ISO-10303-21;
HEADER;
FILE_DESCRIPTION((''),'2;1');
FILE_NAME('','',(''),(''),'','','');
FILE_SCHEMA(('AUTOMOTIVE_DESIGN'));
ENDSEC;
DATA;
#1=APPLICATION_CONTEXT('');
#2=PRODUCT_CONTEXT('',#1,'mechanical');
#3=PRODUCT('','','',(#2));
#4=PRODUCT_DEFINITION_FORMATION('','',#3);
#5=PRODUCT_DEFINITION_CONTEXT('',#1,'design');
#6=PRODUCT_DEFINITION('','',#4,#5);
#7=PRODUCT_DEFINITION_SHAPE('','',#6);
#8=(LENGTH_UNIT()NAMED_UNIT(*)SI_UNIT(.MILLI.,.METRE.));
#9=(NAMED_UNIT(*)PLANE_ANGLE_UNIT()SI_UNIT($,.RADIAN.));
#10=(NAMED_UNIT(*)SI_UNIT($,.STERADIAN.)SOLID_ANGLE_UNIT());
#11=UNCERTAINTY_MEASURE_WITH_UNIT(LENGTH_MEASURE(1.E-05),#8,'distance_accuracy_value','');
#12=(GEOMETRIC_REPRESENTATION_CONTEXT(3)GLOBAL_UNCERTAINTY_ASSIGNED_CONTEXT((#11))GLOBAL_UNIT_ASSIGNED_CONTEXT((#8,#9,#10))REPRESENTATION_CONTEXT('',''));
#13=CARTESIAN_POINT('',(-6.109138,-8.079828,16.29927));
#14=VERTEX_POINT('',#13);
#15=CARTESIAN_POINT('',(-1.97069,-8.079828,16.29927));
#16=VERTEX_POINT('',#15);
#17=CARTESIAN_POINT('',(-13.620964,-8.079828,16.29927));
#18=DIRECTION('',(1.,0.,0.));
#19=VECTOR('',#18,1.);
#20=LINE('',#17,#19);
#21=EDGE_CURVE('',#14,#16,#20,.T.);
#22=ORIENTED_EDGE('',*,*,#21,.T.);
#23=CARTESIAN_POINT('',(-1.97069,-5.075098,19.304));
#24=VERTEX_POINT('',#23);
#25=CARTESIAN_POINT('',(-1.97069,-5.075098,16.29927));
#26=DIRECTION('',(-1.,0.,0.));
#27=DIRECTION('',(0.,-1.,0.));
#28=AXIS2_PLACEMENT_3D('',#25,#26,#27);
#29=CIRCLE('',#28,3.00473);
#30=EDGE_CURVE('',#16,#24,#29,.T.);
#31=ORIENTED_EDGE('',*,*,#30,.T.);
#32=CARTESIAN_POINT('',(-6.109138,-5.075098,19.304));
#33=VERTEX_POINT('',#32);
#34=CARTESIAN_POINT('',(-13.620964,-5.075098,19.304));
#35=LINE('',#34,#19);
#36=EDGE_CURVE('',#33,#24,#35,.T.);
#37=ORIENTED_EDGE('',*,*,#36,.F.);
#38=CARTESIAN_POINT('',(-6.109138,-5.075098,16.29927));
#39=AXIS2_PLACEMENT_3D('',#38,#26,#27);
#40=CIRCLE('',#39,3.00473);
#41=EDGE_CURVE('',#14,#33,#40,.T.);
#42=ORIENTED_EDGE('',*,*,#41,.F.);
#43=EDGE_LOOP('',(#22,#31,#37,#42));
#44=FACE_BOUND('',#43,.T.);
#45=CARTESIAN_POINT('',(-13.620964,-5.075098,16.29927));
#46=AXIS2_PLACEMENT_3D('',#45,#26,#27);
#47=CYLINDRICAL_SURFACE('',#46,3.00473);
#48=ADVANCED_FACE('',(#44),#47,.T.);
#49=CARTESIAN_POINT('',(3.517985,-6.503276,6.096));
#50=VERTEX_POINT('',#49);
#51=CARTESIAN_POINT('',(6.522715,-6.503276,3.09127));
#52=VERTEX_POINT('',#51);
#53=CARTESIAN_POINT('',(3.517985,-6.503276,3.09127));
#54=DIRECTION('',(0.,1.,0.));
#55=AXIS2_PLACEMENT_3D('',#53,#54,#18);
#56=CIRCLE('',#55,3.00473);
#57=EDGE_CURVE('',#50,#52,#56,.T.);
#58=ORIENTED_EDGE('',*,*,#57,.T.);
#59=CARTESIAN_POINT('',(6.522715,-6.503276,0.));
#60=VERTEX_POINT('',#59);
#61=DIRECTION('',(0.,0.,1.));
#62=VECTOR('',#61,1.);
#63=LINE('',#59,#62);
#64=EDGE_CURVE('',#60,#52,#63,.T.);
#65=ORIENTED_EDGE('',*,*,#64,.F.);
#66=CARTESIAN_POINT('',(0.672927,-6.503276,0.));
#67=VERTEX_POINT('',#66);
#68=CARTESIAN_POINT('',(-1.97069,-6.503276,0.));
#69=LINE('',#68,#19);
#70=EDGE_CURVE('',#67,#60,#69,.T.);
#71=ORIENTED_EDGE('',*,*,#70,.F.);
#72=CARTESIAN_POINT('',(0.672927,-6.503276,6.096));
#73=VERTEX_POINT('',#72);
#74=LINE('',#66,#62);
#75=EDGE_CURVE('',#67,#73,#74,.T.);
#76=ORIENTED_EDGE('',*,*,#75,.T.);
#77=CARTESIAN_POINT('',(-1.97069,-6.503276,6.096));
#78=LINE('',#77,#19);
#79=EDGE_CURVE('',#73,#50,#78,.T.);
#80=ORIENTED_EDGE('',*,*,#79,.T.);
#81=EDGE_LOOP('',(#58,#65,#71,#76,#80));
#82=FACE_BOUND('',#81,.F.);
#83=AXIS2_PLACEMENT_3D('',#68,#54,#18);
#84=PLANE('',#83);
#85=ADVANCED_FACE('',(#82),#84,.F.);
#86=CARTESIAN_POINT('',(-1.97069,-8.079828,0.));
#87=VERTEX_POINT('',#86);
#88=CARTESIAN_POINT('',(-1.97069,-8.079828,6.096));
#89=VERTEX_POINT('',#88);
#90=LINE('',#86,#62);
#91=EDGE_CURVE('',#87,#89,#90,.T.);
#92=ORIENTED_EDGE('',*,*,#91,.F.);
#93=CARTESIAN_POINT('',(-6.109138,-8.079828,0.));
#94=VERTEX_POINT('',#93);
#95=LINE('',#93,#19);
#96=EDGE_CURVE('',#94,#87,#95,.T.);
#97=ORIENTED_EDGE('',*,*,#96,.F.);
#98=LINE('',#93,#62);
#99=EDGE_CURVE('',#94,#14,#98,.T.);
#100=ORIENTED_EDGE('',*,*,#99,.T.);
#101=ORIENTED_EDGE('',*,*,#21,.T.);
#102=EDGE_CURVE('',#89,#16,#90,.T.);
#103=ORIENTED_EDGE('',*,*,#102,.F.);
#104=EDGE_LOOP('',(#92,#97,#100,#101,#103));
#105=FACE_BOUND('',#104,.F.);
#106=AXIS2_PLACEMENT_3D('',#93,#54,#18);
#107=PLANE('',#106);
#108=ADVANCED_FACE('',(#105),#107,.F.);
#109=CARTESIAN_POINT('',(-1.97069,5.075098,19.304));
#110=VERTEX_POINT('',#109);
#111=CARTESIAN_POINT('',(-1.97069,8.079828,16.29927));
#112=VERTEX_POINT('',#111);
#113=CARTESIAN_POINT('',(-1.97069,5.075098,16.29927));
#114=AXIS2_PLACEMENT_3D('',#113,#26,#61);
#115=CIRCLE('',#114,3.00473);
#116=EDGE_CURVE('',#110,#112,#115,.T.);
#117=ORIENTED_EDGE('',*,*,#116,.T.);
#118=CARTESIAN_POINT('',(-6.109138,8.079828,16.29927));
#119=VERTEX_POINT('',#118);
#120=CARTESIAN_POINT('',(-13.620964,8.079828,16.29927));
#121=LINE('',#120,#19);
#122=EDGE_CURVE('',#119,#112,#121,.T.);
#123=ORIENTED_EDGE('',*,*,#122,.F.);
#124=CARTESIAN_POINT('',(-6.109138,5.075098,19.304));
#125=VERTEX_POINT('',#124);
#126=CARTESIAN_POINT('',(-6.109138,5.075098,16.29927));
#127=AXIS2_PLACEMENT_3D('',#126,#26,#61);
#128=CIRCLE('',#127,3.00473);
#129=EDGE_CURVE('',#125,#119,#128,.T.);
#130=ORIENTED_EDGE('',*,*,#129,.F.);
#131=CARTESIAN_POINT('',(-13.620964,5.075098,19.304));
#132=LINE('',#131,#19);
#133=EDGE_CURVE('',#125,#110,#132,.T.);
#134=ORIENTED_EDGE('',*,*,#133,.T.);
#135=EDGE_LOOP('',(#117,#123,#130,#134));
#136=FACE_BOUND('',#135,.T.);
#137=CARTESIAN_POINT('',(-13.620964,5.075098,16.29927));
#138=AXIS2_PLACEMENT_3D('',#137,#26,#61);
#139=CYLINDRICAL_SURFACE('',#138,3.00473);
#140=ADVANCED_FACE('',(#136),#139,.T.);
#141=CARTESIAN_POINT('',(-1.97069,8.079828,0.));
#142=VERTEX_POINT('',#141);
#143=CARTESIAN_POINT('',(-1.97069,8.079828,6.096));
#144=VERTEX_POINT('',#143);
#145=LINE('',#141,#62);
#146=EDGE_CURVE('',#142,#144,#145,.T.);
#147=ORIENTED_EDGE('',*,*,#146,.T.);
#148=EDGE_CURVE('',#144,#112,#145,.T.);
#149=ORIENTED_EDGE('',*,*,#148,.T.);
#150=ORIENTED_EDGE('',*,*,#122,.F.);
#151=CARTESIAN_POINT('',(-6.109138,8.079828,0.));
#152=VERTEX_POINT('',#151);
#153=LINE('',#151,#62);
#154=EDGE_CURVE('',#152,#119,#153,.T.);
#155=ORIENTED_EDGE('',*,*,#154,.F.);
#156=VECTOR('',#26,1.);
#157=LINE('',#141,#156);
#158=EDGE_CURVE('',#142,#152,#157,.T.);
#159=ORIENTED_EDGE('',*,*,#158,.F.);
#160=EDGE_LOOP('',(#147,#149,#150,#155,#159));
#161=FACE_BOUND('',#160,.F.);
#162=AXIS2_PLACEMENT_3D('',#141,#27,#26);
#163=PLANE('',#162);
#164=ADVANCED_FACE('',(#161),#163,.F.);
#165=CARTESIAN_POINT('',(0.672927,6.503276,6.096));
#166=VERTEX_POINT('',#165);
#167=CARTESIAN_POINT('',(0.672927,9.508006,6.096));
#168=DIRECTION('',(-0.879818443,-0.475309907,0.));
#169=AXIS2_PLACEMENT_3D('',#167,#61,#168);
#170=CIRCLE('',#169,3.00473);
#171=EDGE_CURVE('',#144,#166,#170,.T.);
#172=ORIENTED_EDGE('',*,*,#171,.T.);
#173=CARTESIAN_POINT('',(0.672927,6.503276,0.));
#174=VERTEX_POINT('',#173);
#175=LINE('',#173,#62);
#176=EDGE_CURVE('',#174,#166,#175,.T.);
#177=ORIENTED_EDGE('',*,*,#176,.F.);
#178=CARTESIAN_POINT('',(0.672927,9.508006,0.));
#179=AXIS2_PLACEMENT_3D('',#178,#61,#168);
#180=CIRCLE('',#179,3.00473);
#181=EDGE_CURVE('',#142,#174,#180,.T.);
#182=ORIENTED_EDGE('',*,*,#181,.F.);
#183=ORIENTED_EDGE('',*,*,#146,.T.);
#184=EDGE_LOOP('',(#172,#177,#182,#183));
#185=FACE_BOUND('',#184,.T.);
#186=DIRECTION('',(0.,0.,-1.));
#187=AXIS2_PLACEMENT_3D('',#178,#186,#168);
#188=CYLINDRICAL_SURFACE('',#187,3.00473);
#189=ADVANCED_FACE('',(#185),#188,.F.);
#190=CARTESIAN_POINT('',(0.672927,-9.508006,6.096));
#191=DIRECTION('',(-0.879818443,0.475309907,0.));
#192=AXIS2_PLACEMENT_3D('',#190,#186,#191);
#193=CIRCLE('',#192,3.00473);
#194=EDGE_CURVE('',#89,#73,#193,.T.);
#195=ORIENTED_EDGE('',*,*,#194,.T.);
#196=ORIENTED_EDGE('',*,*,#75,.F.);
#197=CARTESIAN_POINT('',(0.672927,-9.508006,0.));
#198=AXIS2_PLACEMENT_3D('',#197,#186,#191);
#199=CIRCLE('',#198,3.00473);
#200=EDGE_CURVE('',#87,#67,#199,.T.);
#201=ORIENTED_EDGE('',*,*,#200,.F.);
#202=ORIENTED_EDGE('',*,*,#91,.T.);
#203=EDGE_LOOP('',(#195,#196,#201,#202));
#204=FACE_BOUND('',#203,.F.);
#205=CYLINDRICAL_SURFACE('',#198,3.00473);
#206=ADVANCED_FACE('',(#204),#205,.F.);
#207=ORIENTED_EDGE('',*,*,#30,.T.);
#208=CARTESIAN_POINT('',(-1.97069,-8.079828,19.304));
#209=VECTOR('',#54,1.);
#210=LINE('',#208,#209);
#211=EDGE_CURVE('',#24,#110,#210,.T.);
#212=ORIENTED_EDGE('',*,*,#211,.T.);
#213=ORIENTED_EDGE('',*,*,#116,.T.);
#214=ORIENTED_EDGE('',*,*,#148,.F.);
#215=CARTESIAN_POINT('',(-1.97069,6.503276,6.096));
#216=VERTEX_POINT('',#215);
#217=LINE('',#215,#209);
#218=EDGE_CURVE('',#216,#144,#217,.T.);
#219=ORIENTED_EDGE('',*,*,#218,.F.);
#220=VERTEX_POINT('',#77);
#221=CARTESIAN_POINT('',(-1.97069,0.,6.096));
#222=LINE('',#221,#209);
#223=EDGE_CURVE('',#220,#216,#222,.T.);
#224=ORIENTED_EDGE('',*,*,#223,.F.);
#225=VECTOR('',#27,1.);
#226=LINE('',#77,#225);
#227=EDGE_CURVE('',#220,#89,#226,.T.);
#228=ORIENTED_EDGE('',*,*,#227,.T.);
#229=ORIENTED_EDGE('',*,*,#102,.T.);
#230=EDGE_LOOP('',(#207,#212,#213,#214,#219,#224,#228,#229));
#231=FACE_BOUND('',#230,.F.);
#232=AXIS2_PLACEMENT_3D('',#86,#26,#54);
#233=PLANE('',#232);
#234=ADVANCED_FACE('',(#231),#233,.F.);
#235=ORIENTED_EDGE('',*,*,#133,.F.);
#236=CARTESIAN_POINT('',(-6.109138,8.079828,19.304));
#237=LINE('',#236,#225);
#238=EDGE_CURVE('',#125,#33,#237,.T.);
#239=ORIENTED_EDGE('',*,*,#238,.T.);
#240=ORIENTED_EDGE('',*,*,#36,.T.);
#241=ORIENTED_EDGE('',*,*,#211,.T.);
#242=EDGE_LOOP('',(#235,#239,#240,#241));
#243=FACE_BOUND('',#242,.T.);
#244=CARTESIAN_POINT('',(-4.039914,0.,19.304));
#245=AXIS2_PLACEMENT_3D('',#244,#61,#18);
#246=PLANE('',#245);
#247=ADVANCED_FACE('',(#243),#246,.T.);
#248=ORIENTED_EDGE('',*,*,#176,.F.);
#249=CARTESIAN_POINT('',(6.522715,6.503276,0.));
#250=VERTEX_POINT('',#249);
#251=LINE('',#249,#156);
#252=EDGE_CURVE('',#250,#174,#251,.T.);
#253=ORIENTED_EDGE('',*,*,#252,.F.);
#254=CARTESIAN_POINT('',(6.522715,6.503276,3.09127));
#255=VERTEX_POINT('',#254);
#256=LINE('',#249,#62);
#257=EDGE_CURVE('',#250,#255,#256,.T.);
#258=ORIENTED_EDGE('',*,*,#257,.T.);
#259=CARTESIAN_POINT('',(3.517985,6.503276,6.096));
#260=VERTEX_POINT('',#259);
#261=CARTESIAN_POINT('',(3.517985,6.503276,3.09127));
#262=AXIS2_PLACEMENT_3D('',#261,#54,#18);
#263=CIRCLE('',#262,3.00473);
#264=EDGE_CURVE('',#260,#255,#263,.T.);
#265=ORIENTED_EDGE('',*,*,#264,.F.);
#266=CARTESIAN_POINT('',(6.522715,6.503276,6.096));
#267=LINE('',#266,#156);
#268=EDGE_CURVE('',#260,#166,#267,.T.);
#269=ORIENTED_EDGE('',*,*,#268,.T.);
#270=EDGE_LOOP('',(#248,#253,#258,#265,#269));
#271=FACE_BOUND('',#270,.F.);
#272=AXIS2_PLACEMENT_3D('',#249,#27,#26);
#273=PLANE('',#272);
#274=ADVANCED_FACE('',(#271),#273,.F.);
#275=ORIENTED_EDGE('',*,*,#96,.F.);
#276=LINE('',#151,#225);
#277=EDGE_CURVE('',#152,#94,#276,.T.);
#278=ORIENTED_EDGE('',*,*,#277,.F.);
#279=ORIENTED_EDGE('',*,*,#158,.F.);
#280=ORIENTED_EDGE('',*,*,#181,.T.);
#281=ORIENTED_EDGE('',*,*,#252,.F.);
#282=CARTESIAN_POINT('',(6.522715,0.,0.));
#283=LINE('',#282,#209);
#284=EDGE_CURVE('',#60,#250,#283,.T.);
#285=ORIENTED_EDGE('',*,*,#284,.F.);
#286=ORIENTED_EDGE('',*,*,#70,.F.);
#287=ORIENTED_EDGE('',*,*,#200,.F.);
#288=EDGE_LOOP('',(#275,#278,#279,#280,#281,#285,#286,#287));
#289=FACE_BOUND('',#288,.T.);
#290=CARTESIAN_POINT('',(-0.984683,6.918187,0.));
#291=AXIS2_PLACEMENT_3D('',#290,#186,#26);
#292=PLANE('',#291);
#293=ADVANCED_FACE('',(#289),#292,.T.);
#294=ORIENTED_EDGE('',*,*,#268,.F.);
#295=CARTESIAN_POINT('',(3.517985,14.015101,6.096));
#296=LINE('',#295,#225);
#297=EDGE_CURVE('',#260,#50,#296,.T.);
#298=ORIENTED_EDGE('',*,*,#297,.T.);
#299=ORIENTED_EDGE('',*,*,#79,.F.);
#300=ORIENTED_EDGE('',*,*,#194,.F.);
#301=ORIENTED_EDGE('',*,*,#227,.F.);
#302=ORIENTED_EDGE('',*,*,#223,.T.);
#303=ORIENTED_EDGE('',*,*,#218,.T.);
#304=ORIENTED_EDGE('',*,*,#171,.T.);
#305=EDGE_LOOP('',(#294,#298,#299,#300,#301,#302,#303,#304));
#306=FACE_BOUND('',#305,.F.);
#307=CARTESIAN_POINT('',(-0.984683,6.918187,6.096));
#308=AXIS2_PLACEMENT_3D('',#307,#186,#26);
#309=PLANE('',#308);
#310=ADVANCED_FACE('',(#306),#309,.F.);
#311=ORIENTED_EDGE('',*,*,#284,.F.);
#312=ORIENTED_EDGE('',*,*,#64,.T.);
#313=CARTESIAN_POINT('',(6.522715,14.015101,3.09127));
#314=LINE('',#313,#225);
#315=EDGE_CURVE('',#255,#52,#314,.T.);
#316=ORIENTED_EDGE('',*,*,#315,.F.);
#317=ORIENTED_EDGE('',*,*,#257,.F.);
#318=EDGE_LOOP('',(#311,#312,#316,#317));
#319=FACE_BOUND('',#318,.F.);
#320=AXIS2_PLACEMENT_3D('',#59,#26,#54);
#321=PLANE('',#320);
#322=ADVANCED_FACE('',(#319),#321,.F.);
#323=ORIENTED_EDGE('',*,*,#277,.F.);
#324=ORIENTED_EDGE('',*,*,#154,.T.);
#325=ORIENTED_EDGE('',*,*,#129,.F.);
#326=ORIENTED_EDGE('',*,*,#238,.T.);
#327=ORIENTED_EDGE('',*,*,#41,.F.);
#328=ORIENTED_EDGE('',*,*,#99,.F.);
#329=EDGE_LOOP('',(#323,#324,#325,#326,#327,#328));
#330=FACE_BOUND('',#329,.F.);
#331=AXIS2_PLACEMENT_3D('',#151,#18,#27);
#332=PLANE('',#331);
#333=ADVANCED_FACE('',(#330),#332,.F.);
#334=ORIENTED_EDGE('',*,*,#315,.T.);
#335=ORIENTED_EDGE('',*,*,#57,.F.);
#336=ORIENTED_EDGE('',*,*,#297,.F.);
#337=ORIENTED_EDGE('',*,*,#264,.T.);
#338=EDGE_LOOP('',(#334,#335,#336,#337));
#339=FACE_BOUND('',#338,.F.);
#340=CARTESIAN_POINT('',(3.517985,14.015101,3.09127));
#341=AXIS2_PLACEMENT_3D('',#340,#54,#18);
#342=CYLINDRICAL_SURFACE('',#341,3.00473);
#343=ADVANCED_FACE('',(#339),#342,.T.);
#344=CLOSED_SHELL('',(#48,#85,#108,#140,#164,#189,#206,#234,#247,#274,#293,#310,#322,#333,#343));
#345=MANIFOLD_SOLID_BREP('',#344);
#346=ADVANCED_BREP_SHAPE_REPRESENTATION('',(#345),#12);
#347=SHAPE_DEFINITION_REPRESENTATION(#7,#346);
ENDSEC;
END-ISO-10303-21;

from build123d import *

# Parameters (mm, degrees)
F1_DEPTH    = 19.304
F0_W        = 4.2467024177
F0_H        = 13.0065511912
F2_DEPTH    = 6.096
F3_T1_DEPTH = 6.096
F3_T3_DEPTH = 6.096
F3_T5_DEPTH = 19.1620992743
F3_T7_DEPTH = 19.1620992743
F3_T9_DEPTH = 28.0302021899


# Not quite as in the source:
# - a fillet or chamfer that OpenCascade refuses, or shapes differently, is made with other operations: its cross-section is extruded or revolved along the edge and cut away or added


with BuildPart() as f1:
    # F0 (on Top) → F1 (new body)
    with BuildSketch(Plane.XY):
        Polygon((-6.1091380194, 8.0798277631), (-6.1091380194, 0), (-6.1091380194, -8.0798277631), (-1.9706897438, -8.0798277631), (-1.9706897438, -6.5032755956), (-1.9706897438, 6.5032755956), (-1.9706897438, 8.0798277631), align=None)
    extrude(amount=F1_DEPTH)

    # F0 (on Top) → F2 (join)
    with BuildSketch(Plane.XY):
        with Locations((0.1526614651, 0)):
            Rectangle(F0_W, F0_H)
        with Locations((4.3993638828, 0)):
            Rectangle(F0_W, F0_H)
    extrude(amount=F2_DEPTH)

    # F3: fillet of radius 3.0047301997 on 5 edges, made by hand

    # F3_s2 → F3_t1 (join)
    with BuildSketch(Plane.XY):
        with BuildLine():
            ThreePointArc((-1.9706897438, -8.0798277631), (-0.8660843797, -6.9273379324), (0.6729273014, -6.5032755956))
            Line((0.6729273014, -6.5032755956), (-1.9706897438, -6.5032755956))
            Line((-1.9706897438, -6.5032755956), (-1.9706897438, -8.0798277631))
        make_face()
    extrude(amount=F3_T1_DEPTH)

    # F3_s4 → F3_t3 (join)
    with BuildSketch(Plane.XY):
        with BuildLine():
            ThreePointArc((-1.9706897438, 8.0798277631), (-0.8660843797, 6.9273379324), (0.6729273014, 6.5032755956))
            Line((0.6729273014, 6.5032755956), (-1.9706897438, 6.5032755956))
            Line((-1.9706897438, 6.5032755956), (-1.9706897438, 8.0798277631))
        make_face()
    extrude(amount=F3_T3_DEPTH)

    # F3_s6 → F3_t5 (cut)
    with BuildSketch(Plane.YZ.offset(-13.6209635187)):
        with BuildLine():
            ThreePointArc((5.0750975634, 19.304), (7.1997626633, 18.4239349001), (8.0798277631, 16.2992698003))
            Line((8.0798277631, 16.2992698003), (8.0798277631, 19.304))
            Line((8.0798277631, 19.304), (5.0750975634, 19.304))
        make_face()
    extrude(amount=F3_T5_DEPTH, mode=Mode.SUBTRACT)

    # F3_s8 → F3_t7 (cut)
    with BuildSketch(Plane.YZ.offset(-13.6209635187)):
        with BuildLine():
            ThreePointArc((-8.0798277631, 16.2992698003), (-7.1997626633, 18.4239349001), (-5.0750975634, 19.304))
            Line((-5.0750975634, 19.304), (-8.0798277631, 19.304))
            Line((-8.0798277631, 19.304), (-8.0798277631, 16.2992698003))
        make_face()
    extrude(amount=F3_T7_DEPTH, mode=Mode.SUBTRACT)

    # F3_s10 → F3_t9 (cut)
    with BuildSketch(Plane.XZ.offset(-14.0151010949)):
        with BuildLine():
            ThreePointArc((6.5227150917, 3.0912698003), (5.6426499918, 5.2159349001), (3.517984892, 6.096))
            Line((3.517984892, 6.096), (6.5227150917, 6.096))
            Line((6.5227150917, 6.096), (6.5227150917, 3.0912698003))
        make_face()
    extrude(amount=F3_T9_DEPTH, mode=Mode.SUBTRACT)


solid = f1.part
